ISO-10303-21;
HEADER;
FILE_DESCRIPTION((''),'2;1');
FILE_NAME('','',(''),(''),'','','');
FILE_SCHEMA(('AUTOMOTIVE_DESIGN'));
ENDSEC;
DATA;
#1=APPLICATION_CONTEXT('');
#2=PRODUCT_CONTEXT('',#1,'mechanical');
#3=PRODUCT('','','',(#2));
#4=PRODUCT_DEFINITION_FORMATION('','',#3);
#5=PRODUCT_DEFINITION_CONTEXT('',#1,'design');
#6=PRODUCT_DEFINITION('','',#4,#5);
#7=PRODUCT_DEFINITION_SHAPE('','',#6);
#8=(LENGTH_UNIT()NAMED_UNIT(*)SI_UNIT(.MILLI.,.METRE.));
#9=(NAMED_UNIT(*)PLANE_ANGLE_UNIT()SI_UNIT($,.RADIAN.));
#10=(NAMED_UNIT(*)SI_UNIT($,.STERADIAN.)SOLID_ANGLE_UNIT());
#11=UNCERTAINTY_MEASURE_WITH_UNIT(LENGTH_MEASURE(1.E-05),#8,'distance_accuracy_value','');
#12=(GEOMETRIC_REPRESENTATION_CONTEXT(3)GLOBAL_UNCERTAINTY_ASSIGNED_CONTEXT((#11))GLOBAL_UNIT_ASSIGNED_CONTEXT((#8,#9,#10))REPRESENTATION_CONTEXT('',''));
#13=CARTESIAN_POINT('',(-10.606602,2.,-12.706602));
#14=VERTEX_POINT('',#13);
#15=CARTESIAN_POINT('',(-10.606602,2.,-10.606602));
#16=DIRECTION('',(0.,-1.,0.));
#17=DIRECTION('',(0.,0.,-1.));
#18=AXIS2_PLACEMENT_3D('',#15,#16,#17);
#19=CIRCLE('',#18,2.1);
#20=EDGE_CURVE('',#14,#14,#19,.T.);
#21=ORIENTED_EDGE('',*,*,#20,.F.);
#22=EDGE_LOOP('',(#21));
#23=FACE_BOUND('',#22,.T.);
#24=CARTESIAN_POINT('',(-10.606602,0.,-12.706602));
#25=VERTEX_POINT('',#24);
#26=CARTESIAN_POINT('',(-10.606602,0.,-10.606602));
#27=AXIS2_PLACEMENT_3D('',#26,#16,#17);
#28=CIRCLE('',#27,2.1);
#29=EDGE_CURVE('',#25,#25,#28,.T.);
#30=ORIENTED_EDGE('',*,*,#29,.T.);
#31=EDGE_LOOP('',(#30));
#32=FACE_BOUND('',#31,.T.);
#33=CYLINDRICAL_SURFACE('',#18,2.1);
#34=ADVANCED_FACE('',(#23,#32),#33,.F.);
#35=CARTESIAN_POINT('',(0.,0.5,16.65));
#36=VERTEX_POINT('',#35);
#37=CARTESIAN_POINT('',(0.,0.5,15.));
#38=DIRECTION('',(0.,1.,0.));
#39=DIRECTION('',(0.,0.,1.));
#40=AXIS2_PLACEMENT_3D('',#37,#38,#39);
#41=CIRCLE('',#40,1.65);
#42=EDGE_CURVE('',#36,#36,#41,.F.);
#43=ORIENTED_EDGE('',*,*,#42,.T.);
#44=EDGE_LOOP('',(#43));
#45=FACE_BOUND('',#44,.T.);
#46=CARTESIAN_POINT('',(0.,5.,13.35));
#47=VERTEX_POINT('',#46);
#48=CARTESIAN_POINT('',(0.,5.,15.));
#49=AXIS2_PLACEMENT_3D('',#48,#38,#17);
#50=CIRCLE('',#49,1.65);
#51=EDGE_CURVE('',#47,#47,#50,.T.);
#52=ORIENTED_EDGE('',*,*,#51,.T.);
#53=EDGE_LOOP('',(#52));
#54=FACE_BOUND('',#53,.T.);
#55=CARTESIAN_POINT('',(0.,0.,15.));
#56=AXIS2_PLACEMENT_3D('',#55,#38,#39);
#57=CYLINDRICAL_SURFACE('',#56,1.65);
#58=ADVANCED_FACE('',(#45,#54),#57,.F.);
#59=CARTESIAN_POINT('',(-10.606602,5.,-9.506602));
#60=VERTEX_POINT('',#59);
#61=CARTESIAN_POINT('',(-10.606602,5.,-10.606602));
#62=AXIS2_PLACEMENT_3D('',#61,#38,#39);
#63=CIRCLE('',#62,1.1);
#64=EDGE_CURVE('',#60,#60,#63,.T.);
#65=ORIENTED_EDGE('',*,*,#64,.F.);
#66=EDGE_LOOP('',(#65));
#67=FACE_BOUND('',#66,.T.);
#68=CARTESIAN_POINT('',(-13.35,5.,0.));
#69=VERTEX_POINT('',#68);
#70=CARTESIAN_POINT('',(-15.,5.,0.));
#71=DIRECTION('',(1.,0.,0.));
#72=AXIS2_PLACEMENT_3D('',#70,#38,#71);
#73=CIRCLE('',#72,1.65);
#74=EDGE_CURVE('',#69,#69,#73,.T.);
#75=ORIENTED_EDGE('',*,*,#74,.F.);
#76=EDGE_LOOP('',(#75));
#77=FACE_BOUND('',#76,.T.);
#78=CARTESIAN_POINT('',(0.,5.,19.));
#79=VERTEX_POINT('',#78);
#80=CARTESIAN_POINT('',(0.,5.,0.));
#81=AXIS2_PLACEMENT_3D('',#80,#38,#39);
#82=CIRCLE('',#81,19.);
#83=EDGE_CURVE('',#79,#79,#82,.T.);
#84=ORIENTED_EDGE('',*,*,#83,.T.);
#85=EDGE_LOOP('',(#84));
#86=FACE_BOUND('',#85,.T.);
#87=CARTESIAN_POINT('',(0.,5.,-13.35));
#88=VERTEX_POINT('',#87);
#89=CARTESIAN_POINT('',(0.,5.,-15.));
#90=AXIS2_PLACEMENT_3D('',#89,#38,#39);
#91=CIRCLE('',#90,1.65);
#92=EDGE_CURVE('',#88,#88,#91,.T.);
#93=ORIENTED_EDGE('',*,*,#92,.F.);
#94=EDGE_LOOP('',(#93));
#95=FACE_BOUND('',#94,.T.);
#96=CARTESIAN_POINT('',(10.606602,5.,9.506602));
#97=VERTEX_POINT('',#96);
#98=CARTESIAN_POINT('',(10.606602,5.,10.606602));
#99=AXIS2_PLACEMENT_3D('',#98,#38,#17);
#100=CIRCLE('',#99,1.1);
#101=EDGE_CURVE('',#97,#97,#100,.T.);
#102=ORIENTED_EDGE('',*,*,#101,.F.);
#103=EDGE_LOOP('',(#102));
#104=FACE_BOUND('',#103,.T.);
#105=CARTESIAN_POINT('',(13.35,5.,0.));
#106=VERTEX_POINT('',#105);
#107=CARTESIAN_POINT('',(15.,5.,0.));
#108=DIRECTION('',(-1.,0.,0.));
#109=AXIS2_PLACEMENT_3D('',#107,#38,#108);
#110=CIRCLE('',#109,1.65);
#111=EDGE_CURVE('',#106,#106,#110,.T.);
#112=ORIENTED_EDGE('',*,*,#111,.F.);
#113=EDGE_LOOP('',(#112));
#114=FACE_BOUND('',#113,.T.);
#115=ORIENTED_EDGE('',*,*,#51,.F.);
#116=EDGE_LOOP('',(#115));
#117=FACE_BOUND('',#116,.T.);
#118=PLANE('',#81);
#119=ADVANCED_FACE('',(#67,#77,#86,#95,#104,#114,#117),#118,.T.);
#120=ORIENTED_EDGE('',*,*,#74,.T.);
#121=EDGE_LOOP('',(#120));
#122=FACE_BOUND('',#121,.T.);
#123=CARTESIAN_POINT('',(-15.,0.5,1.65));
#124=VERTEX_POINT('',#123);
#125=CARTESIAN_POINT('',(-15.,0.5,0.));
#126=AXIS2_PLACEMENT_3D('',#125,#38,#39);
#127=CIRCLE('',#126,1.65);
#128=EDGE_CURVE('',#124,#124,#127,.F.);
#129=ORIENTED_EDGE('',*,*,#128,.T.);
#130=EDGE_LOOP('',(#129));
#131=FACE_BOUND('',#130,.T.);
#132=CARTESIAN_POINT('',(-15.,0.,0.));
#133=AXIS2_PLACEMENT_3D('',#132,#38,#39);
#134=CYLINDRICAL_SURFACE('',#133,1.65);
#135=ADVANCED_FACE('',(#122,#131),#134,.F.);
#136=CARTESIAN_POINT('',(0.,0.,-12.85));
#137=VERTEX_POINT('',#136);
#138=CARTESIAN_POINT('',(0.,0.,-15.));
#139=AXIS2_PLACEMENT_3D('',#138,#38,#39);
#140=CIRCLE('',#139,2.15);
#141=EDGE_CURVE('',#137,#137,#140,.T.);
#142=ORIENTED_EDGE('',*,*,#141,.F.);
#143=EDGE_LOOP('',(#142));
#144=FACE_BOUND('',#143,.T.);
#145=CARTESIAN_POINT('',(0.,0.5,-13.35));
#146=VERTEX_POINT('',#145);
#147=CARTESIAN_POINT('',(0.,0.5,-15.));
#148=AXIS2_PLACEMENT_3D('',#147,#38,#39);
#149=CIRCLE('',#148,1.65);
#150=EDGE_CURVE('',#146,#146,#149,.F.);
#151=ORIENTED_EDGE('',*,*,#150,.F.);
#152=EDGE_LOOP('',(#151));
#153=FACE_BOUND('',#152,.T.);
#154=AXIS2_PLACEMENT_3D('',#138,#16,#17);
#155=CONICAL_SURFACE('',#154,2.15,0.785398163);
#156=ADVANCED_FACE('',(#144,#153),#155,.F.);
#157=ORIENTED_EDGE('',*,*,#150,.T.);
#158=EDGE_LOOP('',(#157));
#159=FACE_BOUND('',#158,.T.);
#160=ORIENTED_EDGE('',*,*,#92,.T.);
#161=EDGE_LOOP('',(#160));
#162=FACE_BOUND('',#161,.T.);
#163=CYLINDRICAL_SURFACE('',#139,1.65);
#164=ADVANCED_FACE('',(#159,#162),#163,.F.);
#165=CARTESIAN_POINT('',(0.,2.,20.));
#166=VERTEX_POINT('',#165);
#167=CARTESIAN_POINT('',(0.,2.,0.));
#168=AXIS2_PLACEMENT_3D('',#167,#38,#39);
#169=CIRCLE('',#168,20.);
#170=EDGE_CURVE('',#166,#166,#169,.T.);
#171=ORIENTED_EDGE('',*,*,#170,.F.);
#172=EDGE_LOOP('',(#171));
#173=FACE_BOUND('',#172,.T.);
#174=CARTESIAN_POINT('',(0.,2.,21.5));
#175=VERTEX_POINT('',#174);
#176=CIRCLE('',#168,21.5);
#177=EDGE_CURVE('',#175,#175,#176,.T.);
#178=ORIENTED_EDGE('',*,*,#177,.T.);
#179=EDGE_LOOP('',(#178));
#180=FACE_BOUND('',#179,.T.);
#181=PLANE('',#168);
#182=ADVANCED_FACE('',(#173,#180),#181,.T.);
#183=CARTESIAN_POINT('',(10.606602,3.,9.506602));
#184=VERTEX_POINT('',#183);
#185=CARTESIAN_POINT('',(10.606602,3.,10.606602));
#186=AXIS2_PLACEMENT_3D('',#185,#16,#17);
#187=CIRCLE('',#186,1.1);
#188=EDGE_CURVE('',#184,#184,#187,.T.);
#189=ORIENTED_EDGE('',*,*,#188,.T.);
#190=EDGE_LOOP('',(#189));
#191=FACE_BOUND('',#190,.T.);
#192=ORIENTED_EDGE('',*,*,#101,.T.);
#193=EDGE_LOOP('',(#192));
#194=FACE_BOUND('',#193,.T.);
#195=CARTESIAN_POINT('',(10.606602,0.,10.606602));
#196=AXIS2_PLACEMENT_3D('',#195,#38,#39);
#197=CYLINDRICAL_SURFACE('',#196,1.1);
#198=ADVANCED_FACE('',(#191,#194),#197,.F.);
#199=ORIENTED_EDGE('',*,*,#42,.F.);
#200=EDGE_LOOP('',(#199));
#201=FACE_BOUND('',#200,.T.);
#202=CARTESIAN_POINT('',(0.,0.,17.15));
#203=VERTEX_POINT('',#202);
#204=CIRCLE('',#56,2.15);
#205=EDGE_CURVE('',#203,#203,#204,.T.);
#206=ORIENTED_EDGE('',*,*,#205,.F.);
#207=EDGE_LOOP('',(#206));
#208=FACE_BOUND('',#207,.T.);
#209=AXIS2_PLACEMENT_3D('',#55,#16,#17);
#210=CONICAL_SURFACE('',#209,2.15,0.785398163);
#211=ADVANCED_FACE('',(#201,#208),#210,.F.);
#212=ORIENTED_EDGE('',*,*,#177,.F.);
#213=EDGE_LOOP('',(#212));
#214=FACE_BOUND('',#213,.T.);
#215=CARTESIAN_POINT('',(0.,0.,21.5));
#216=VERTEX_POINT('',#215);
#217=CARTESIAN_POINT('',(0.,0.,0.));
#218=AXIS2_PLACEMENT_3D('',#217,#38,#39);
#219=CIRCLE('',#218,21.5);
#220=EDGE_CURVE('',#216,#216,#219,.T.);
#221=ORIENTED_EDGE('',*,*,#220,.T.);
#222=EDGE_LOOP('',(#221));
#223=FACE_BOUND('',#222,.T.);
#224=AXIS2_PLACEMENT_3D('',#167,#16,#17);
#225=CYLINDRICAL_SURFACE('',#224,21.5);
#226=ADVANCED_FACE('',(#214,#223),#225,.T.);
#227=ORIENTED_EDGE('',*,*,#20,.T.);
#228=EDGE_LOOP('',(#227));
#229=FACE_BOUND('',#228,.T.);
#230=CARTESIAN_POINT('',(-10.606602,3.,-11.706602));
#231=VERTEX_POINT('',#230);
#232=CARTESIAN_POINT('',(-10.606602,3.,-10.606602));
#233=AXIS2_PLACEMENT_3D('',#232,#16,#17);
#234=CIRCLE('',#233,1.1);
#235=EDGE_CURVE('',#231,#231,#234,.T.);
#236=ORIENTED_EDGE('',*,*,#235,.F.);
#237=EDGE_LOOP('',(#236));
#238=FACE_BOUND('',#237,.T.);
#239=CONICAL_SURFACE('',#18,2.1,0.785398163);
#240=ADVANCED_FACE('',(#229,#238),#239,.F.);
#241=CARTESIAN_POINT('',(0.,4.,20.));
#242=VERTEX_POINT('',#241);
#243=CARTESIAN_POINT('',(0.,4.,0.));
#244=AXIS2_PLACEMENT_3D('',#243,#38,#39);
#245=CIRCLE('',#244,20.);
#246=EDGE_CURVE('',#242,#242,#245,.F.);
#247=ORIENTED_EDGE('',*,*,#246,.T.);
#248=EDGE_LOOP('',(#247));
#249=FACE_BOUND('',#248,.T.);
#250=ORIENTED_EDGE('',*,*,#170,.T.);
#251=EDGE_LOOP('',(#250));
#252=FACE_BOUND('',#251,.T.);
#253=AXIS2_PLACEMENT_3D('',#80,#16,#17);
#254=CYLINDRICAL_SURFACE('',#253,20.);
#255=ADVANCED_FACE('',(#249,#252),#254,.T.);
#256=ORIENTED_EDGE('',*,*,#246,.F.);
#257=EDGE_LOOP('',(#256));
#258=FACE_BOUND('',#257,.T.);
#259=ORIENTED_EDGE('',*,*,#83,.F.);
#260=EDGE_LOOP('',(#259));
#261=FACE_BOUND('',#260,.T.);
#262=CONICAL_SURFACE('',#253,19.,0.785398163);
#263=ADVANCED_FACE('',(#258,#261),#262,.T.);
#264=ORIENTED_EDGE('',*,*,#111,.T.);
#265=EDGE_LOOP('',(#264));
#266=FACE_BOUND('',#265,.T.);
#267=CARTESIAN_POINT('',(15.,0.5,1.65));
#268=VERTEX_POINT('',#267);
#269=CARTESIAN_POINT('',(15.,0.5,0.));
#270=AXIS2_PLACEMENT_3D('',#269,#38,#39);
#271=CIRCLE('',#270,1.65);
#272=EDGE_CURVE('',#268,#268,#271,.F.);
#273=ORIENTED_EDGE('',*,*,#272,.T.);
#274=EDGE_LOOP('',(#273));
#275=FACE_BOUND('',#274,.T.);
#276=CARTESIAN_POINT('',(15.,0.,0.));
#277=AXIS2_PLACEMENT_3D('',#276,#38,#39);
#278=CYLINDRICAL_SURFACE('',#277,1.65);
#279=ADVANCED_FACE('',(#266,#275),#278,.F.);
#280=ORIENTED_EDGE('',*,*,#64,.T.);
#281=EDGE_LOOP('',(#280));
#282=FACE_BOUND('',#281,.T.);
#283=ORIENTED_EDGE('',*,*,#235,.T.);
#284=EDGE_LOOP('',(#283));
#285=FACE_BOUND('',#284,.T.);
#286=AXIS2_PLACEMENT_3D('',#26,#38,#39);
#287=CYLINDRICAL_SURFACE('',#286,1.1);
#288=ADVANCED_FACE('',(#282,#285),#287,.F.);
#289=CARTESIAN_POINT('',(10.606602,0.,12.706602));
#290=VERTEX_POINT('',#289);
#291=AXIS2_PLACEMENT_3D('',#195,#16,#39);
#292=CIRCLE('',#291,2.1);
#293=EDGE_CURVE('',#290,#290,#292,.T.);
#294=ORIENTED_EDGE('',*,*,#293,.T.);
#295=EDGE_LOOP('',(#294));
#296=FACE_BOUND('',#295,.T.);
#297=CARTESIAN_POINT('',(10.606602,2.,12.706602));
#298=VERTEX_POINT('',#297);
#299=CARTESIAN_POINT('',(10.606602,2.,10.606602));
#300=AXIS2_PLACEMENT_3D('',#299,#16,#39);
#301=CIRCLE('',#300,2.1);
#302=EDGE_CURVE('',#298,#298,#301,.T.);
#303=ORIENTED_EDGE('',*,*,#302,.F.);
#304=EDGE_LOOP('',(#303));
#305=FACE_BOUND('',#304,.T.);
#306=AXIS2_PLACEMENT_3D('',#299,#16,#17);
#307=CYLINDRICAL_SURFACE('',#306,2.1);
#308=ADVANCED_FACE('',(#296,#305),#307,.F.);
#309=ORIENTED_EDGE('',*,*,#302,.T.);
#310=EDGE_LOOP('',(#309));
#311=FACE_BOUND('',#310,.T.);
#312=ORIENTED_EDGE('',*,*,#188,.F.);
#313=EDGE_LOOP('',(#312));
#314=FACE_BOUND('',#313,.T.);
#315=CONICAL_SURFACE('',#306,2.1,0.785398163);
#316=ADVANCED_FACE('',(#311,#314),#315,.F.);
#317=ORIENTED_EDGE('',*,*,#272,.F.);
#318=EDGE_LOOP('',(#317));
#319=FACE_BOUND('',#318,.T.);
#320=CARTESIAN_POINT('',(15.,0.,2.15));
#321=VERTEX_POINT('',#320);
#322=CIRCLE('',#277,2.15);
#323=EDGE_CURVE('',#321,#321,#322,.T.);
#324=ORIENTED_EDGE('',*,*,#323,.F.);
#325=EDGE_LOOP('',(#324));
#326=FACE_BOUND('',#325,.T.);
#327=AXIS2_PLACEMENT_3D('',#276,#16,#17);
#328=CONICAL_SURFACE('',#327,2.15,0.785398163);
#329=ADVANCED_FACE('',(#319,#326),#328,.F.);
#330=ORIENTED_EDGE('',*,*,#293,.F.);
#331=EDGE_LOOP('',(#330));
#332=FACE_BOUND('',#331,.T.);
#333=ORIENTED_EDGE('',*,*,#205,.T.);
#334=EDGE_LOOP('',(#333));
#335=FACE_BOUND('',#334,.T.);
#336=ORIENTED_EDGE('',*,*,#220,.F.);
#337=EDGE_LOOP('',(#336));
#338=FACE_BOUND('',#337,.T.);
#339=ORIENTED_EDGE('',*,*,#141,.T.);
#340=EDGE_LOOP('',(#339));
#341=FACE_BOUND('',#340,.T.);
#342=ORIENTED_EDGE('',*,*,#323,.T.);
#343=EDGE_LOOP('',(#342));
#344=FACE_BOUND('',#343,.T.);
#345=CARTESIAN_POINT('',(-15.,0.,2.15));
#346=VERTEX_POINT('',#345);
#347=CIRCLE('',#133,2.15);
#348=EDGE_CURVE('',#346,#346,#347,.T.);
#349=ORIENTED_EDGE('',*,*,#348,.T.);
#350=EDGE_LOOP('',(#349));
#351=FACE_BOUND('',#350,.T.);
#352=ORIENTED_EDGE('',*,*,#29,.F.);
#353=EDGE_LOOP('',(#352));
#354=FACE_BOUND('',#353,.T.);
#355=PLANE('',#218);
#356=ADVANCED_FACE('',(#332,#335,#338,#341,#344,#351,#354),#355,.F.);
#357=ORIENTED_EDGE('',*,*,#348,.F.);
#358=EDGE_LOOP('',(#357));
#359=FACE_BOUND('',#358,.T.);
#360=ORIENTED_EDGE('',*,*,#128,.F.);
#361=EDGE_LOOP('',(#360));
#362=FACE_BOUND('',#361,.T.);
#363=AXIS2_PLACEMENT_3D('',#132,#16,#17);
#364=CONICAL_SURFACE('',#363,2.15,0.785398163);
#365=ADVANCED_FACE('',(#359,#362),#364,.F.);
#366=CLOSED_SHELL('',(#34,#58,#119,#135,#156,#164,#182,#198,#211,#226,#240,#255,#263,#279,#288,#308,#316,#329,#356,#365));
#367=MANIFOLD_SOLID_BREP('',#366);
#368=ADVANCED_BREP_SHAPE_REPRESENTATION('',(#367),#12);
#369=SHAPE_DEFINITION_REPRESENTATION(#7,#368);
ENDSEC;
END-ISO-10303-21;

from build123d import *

# Parameters (mm, degrees)
SKETCH_1_R                           = 21.5
EXTRUDE_1_DEPTH                      = 2
SKETCH_3_R                           = 20
EXTRUDE_2_DEPTH                      = 3
CHAMFER_1_SIZE                       = 1
SKETCH_4_R                           = 1.65
CUT_EXTRUDE_1_DEPTH                  = 31.813957876
CHAMFER_2_SIZE                       = 0.5
PATTERN_CIRCULAR_1_COUNT             = 4
CHAMFER_2_OF_PATTERN_CIRCULAR_1_SIZE = 0.5
SKETCH_5_R                           = 1.1
CUT_EXTRUDE_2_DEPTH                  = 31.813957876
SKETCH_6_R                           = 2.1
CUT_EXTRUDE_3_DEPTH                  = 2
CHAMFER_3_SIZE                       = 1
PATTERN_CIRCULAR_2_COUNT             = 2
CHAMFER_3_OF_PATTERN_CIRCULAR_2_SIZE = 1


with BuildPart() as part:
    # 草图1 → 凸台-拉伸1 (new body)
    with BuildSketch(Plane(origin=(0, 0, 0), x_dir=(1, 0, 0), z_dir=(0, 1, 0))):
        with Locations(Location((0, 0, 0), (0, 0, 270))):
            Circle(SKETCH_1_R)
    extrude(amount=EXTRUDE_1_DEPTH)

    # 草图3 → 凸台-拉伸2 (add)
    with BuildSketch(Plane(origin=(0, 2, 0), x_dir=(1, 0, 0), z_dir=(0, 1, 0))):
        with Locations(Location((0, 0, 0), (0, 0, 270))):
            Circle(SKETCH_3_R)
    extrude(amount=EXTRUDE_2_DEPTH)

    # 倒角1
    chamfer_1_edges = [part.edges().sort_by_distance(p)[0] for p in [
        (0, 5, -20),
    ]]
    chamfer(chamfer_1_edges, length=CHAMFER_1_SIZE)

    # 草图4 → 切除-拉伸1 (cut, through all)
    with BuildSketch(Plane(origin=(0, 5, 0), x_dir=(1, 0, 0), z_dir=(0, 1, 0))):
        with Locations(Location((0, 15, 0), (0, 0, 270))):
            Circle(SKETCH_4_R)
    cut_extrude_1 = extrude(amount=-CUT_EXTRUDE_1_DEPTH, mode=Mode.SUBTRACT)

    # 倒角2
    chamfer_2_edges = [part.edges().sort_by_distance(p)[0] for p in [
        (0, 0, -16.65),
    ]]
    chamfer(chamfer_2_edges, length=CHAMFER_2_SIZE)

    # 阵列(圆周)1: 切除-拉伸1 ×4 about axis
    pattern_circular_1_axis = Axis((0, 0, 0), (0, 1, 0))
    for i in range(1, PATTERN_CIRCULAR_1_COUNT):
        add(cut_extrude_1.rotate(pattern_circular_1_axis, i * 360 / PATTERN_CIRCULAR_1_COUNT), mode=Mode.SUBTRACT)

    # 倒角2 of 阵列(圆周)1
    chamfer_2_of_pattern_circular_1_edges = [part.edges().sort_by_distance(p)[0] for p in [
        (-16.65, 0, 0),
        (0, 0, 16.65),
        (16.65, 0, 0),
    ]]
    chamfer(chamfer_2_of_pattern_circular_1_edges, length=CHAMFER_2_OF_PATTERN_CIRCULAR_1_SIZE)

    # 草图5 → 切除-拉伸2 (cut, through all)
    with BuildSketch(Plane(origin=(0, 5, 0), x_dir=(1, 0, 0), z_dir=(0, 1, 0))):
        with Locations(Location((-10.606601718, 10.606601718, 0), (0, 0, 270))):
            Circle(SKETCH_5_R)
    cut_extrude_2 = extrude(amount=-CUT_EXTRUDE_2_DEPTH, mode=Mode.SUBTRACT)

    # 草图6 → 切除-拉伸3 (cut)
    with BuildSketch(Plane.XZ):
        with Locations(Location((-10.606601718, -10.606601718, 0), (0, 0, 270))):
            Circle(SKETCH_6_R)
    cut_extrude_3 = extrude(amount=-CUT_EXTRUDE_3_DEPTH, mode=Mode.SUBTRACT)

    # 倒角3
    chamfer_3_edges = [part.edges().sort_by_distance(p)[0] for p in [
        (-10.606601718, 2, -11.706601718),
    ]]
    chamfer(chamfer_3_edges, length=CHAMFER_3_SIZE - 0.0001)  # a hair under: the kernel refuses the full size

    # 阵列(圆周)2: 切除-拉伸2, 切除-拉伸3 ×2 about axis
    pattern_circular_2_axis = Axis((0, 0, 0), (0, 1, 0))
    add([cut_extrude_2.rotate(pattern_circular_2_axis, i * 360 / PATTERN_CIRCULAR_2_COUNT) for i in range(1, PATTERN_CIRCULAR_2_COUNT)], mode=Mode.SUBTRACT)
    add([cut_extrude_3.rotate(pattern_circular_2_axis, i * 360 / PATTERN_CIRCULAR_2_COUNT) for i in range(1, PATTERN_CIRCULAR_2_COUNT)], mode=Mode.SUBTRACT)

    # 倒角3 of 阵列(圆周)2
    chamfer_3_of_pattern_circular_2_edges = [part.edges().sort_by_distance(p)[0] for p in [
        (10.606601718, 2, 11.706601718),
    ]]
    chamfer(chamfer_3_of_pattern_circular_2_edges, length=CHAMFER_3_OF_PATTERN_CIRCULAR_2_SIZE - 0.0001)  # a hair under: the kernel refuses the full size


solid = part.part
